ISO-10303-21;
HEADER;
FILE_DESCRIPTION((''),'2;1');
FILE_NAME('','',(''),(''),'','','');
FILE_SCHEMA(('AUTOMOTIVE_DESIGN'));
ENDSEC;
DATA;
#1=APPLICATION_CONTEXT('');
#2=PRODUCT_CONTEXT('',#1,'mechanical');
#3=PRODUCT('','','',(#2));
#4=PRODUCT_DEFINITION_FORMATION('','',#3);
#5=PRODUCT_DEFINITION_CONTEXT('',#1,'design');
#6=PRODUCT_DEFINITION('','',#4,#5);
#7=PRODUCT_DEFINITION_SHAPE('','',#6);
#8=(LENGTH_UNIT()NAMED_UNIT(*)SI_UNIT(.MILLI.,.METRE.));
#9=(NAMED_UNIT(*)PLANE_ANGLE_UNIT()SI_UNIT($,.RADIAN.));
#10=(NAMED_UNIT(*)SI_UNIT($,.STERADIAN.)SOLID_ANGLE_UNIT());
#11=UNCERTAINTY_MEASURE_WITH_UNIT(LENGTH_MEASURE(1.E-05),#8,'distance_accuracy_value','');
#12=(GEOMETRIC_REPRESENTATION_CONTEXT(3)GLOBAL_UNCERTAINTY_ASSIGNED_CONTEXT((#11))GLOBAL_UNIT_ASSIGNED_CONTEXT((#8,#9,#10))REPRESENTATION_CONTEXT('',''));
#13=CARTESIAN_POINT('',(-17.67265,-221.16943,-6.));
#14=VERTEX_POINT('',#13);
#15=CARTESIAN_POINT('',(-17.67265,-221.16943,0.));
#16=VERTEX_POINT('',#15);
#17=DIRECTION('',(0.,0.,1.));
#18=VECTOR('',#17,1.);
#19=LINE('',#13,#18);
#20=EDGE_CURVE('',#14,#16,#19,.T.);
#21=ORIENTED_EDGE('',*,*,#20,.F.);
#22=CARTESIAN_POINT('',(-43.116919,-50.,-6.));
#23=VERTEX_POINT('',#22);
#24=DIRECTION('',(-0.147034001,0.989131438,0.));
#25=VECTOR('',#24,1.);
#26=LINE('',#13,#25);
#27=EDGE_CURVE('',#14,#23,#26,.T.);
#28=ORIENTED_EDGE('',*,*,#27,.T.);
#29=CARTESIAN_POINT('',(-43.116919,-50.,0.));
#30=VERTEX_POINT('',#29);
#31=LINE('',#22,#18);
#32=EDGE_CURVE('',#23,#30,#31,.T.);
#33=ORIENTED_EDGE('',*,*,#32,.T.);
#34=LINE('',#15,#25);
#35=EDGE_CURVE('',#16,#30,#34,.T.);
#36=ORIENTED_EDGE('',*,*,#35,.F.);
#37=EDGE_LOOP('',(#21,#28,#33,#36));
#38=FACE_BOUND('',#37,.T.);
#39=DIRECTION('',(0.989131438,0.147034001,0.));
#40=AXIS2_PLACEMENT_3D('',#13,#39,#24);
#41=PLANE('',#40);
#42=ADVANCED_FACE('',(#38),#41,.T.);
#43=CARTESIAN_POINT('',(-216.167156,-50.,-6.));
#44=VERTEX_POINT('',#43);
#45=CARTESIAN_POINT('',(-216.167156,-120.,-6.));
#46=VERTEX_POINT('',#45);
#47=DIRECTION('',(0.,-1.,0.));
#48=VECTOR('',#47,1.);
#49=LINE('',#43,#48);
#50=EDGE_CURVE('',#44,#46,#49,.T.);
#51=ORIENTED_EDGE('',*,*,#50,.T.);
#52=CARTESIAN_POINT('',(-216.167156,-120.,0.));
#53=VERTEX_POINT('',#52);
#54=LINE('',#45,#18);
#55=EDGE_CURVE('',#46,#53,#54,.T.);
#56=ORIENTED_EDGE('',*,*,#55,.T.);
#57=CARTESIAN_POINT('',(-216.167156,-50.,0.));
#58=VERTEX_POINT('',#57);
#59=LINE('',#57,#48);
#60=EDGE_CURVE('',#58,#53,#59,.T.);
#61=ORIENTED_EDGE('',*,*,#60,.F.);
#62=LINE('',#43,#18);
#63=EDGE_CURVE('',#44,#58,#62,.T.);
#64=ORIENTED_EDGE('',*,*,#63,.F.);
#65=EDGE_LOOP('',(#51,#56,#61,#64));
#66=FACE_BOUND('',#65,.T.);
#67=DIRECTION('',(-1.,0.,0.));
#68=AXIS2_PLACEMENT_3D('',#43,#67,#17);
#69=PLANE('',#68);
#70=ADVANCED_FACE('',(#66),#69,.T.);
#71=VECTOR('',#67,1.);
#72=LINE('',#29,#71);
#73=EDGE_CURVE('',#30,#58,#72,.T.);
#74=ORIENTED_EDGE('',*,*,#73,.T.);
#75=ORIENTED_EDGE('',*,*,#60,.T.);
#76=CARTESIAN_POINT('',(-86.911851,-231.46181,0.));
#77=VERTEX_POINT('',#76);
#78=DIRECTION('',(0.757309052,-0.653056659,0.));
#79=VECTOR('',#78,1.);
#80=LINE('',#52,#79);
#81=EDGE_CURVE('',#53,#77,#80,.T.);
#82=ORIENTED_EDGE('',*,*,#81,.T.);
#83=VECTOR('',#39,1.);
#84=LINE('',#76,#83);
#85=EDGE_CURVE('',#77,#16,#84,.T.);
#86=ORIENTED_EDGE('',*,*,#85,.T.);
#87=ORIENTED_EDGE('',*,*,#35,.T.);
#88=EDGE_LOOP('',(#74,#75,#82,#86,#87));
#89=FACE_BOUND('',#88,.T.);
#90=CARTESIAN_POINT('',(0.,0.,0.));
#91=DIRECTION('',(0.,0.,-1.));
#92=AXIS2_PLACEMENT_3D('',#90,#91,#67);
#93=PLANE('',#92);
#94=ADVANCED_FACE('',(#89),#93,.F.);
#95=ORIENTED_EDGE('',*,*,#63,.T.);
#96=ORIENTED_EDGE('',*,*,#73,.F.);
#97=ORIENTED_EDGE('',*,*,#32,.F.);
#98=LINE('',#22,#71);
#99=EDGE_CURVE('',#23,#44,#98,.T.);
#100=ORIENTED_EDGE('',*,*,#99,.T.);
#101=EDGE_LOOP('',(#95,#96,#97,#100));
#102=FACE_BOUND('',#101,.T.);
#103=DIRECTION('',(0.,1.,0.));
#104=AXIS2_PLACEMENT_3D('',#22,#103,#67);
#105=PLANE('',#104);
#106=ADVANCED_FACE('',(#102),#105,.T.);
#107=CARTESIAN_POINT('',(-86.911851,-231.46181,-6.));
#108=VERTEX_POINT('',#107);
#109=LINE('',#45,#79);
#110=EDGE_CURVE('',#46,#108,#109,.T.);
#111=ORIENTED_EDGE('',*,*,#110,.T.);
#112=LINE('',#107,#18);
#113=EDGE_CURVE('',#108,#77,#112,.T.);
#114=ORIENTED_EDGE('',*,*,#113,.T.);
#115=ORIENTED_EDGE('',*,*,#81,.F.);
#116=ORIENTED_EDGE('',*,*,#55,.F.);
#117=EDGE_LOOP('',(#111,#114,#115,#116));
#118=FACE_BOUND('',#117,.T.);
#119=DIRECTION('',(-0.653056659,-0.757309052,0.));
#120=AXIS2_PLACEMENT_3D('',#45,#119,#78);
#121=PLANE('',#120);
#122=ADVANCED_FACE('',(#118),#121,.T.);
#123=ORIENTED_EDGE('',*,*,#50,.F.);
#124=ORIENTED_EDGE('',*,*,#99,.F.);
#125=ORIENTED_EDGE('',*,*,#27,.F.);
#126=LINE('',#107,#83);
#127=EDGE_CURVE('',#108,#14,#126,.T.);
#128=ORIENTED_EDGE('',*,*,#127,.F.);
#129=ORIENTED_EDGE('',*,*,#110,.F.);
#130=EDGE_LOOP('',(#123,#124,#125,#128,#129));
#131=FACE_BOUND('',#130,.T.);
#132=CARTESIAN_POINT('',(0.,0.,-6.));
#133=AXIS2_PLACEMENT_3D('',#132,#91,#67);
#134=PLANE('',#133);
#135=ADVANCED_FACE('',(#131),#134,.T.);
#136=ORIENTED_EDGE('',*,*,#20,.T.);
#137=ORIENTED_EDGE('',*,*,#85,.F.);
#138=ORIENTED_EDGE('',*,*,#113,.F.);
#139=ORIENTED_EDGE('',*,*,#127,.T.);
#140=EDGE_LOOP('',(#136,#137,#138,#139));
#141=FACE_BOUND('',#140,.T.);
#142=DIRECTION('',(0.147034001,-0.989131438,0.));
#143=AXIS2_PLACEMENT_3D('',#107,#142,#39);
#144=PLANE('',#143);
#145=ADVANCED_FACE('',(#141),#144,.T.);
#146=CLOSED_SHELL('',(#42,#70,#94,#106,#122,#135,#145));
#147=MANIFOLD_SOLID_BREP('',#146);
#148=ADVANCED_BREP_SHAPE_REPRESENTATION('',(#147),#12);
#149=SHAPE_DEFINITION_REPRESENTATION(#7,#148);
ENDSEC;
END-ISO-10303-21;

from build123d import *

# Parameters (mm, degrees)
SM_BASE_FLANGE_1_DEPTH = 6


# Sheet-metal steps are written as plain solids
with BuildPart() as part:
    # Sketch 1 → Базовая кромка1 (new body)
    with BuildSketch(Plane.XY):
        Polygon((-43.116918841, -50), (-216.167156359, -50), (-216.167156359, -120), (-86.91185076, -231.461810426), (-17.672650067, -221.169430365), align=None)
    extrude(amount=-SM_BASE_FLANGE_1_DEPTH)


solid = part.part
